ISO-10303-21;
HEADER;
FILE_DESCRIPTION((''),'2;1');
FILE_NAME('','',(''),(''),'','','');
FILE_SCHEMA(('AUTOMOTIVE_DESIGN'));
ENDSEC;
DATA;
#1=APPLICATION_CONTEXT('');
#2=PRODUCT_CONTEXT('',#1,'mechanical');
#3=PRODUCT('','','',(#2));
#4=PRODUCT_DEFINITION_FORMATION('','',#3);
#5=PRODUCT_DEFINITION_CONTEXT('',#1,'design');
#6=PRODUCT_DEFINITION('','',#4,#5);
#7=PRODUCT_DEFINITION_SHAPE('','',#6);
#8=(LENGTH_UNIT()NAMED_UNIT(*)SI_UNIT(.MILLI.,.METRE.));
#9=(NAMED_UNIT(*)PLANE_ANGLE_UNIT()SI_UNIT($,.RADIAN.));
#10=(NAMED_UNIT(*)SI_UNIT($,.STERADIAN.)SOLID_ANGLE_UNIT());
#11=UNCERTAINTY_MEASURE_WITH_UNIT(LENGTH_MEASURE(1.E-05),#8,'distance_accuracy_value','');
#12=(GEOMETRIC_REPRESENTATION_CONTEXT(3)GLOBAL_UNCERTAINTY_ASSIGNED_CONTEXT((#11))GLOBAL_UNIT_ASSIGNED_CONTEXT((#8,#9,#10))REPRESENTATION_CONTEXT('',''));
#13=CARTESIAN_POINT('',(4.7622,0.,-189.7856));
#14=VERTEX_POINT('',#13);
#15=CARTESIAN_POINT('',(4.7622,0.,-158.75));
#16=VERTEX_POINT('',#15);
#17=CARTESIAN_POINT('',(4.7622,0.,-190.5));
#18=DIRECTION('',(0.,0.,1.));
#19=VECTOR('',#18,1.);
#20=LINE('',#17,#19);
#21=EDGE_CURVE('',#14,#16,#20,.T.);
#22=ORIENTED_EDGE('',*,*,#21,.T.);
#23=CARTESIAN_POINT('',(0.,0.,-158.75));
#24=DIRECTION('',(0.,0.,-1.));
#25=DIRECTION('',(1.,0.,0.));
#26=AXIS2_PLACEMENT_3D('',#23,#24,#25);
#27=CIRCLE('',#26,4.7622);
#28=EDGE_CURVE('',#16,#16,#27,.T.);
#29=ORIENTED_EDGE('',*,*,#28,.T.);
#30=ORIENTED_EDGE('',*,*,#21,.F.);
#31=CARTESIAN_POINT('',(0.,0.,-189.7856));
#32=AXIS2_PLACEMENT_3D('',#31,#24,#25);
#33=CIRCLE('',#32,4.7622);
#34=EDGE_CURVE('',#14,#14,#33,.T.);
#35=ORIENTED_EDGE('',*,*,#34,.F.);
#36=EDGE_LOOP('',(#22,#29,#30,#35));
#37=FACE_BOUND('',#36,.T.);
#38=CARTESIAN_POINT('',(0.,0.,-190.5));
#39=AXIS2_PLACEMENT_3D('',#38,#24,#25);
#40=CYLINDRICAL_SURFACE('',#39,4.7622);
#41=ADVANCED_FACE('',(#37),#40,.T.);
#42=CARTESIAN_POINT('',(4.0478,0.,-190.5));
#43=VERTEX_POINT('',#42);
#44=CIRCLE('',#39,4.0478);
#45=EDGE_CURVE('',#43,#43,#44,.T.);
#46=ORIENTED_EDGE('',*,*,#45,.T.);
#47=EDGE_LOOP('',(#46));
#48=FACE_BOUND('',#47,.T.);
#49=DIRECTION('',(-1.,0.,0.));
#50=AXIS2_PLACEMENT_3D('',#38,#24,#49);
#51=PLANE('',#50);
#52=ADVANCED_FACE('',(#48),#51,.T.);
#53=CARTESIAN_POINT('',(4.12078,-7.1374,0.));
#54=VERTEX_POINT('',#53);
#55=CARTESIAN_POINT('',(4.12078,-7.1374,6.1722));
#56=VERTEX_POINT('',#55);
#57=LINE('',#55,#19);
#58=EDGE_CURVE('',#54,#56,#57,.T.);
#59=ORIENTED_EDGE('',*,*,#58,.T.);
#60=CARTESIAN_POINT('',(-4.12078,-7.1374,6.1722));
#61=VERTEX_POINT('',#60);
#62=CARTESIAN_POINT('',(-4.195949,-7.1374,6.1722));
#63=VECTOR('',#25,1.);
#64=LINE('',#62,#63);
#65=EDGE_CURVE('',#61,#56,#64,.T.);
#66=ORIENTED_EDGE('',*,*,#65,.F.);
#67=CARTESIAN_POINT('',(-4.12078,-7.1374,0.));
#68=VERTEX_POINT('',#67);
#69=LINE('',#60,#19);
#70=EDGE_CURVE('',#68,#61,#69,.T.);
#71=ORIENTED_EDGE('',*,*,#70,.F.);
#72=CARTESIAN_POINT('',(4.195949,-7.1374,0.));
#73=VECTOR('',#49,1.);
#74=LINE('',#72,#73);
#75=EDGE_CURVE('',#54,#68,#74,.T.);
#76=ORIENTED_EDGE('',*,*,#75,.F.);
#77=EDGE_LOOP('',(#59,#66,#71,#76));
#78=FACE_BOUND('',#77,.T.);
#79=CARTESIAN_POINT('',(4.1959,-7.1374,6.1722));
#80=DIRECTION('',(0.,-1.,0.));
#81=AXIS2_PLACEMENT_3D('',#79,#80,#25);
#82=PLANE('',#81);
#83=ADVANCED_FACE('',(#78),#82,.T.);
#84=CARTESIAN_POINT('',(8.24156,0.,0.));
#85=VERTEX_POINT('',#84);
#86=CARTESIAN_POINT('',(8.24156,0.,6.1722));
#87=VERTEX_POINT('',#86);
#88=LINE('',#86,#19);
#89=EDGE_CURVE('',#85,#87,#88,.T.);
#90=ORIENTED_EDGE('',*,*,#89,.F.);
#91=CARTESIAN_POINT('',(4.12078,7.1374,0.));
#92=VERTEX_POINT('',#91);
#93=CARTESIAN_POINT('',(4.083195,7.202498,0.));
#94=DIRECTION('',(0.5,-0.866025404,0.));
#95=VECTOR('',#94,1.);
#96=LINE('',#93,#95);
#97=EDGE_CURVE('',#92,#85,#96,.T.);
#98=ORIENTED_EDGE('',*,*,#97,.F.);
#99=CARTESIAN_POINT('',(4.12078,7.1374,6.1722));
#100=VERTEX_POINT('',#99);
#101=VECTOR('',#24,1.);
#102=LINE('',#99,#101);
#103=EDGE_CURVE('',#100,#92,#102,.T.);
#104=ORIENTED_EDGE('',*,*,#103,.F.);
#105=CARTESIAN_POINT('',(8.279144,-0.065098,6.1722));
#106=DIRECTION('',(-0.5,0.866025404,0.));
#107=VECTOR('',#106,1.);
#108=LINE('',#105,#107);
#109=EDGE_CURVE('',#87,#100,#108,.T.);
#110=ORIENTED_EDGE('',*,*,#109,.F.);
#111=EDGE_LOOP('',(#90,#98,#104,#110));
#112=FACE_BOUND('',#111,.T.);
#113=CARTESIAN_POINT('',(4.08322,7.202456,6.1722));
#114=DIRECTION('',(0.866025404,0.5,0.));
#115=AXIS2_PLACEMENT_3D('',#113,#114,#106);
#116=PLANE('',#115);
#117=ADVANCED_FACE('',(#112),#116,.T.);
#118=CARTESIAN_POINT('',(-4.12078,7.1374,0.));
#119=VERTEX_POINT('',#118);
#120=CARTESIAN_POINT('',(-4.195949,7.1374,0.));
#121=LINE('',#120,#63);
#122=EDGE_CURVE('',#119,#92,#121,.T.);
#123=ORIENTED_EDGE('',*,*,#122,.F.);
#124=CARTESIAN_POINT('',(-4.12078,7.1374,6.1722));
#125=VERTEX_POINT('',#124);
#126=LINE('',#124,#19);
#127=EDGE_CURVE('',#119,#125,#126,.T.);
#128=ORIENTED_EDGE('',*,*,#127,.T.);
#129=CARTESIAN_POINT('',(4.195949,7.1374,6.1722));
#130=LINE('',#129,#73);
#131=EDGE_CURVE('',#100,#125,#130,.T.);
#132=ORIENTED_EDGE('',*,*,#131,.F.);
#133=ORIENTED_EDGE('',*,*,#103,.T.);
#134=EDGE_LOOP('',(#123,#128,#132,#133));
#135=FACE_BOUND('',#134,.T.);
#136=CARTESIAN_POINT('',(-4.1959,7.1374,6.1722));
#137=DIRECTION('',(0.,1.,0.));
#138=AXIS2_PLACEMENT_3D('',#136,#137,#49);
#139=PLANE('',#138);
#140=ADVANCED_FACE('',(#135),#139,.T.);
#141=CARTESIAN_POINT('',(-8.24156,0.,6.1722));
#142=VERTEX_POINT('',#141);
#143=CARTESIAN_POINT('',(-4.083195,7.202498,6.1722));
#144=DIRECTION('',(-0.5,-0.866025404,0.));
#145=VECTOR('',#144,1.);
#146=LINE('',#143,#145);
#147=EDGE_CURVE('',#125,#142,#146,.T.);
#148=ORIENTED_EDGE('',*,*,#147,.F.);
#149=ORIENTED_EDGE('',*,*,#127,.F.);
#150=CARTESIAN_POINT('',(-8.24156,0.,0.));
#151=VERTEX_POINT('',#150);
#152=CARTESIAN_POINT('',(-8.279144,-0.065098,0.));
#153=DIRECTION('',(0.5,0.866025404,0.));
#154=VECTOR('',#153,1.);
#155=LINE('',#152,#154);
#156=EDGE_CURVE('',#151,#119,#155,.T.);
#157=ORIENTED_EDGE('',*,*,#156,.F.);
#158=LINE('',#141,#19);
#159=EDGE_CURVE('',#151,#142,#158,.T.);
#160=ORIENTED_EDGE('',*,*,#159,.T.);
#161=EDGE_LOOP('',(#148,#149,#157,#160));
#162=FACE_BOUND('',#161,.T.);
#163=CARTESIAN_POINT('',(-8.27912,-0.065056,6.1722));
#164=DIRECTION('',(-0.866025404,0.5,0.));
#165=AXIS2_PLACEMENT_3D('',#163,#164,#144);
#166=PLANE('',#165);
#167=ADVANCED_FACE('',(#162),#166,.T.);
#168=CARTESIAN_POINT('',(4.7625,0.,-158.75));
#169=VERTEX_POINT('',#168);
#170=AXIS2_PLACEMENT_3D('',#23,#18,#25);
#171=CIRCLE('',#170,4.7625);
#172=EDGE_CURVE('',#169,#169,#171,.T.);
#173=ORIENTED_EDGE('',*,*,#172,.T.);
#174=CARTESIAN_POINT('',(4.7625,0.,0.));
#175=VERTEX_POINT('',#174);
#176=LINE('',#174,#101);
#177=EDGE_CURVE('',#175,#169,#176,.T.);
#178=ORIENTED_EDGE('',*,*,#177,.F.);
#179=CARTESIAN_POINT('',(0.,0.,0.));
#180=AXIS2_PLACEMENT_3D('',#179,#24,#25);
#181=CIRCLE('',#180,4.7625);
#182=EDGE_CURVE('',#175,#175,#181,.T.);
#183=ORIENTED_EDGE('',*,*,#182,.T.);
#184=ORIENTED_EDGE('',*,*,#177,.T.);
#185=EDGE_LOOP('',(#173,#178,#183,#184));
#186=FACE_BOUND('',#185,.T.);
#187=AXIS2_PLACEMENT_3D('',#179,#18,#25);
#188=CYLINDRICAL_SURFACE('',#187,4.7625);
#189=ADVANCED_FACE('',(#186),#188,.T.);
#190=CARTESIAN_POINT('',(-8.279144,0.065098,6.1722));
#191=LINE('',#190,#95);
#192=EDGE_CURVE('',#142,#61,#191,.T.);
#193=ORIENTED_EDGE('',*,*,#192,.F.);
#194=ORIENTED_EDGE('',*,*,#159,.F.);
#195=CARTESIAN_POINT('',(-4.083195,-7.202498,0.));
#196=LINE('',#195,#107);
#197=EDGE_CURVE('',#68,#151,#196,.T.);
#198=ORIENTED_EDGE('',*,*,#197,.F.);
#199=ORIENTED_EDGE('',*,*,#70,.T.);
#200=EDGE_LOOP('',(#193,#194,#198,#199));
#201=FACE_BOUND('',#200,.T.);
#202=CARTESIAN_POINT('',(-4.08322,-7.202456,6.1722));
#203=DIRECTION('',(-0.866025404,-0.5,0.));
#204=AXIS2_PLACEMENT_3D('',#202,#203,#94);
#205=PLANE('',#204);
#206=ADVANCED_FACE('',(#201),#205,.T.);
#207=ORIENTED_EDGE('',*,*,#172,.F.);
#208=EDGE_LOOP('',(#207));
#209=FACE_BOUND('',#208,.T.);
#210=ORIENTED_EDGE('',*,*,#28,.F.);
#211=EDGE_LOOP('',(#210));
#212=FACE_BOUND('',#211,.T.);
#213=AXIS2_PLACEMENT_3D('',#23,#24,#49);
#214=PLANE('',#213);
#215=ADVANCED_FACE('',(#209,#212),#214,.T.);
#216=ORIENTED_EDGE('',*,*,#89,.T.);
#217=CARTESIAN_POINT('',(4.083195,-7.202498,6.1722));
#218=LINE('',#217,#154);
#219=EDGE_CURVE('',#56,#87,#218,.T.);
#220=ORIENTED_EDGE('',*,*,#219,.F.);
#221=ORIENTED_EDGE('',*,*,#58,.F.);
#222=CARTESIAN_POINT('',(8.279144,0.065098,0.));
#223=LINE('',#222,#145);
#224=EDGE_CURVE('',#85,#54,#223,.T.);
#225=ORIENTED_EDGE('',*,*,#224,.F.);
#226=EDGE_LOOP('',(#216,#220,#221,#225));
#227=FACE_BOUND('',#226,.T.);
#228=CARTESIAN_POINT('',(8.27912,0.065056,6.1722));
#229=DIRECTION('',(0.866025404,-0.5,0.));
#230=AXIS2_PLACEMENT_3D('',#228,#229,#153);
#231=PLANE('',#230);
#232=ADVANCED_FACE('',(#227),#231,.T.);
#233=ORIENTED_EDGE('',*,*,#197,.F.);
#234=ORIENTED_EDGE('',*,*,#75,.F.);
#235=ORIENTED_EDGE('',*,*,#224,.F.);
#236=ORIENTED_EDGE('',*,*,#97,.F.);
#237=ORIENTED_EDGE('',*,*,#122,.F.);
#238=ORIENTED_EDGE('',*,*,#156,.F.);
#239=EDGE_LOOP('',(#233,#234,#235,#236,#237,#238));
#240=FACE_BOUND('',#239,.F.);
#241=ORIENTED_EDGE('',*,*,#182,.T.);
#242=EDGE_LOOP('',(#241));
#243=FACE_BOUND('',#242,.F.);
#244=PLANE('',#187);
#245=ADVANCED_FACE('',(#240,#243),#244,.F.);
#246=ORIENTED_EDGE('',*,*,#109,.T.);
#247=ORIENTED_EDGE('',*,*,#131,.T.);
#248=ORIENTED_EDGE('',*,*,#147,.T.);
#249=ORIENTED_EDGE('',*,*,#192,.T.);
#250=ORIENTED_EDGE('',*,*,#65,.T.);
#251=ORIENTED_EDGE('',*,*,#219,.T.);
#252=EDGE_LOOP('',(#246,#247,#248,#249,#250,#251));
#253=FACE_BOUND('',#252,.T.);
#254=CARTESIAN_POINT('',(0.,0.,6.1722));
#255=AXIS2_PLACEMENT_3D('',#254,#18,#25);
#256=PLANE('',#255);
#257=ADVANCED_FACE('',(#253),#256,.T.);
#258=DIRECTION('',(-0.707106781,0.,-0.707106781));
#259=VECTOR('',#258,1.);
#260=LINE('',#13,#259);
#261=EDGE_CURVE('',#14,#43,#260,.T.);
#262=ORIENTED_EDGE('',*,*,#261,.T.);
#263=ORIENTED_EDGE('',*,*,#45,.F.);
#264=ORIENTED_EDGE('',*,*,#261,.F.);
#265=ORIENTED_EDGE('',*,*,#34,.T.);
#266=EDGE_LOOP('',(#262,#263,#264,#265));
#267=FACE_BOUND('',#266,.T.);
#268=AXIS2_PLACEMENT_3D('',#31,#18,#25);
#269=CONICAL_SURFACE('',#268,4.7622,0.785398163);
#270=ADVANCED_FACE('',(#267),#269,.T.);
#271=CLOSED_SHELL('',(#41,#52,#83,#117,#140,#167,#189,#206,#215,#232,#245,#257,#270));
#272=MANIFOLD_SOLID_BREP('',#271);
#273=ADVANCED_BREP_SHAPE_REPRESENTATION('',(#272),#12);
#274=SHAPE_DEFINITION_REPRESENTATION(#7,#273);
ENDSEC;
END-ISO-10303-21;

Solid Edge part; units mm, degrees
sketch "Sketch1" plane through (0, 0, 0) normal (0, 0, 1) x (1, 0, 0)
  circle A0 centre (0, 0) radius 8.2794
  dimension "D1" = 16.5588
extrude "Protrusion1" add sketch "Sketch1" along normal blind 6.1722
sketch "Sketch2" plane through (0, 0, 0) normal (0, 0, -1) x (1, 0, 0)
  circle A0 centre (0, 0) radius 4.7625
extrude "Protrusion2" add sketch "Sketch2" along normal blind 190.5
sketch "Sketch3" plane through (0, 0, -190.5) normal (0, 0, -1) x (1, 0, 0)
  circle A0 centre (0, 0) radius 4.7622
extrude "Cutout1" cut sketch "Sketch3" against normal blind 31.75 flip side to cut
chamfer "Chamfer_1" distance 0.7144 angle 45 1 edges at (-4.7622, 0, -190.5)
sketch "Sketch4" plane through (0, 0, 6.1722) normal (0, 0, 1) x (1, 0, 0)
  line L0 (-4.1959, 7.1374) -> (4.1959, 7.1374)
  dimension "D1" = 14.2748
extrude "Cutout2" cut sketch "Sketch4" against normal up to next material side at (0, 7.1874, 6.1722)
pattern_circular "Pattern1" count 6 over 360 about axis through (0, 0, 6.1722) along (0, 0, 1) of "Cutout2"
properties part number "117611"
